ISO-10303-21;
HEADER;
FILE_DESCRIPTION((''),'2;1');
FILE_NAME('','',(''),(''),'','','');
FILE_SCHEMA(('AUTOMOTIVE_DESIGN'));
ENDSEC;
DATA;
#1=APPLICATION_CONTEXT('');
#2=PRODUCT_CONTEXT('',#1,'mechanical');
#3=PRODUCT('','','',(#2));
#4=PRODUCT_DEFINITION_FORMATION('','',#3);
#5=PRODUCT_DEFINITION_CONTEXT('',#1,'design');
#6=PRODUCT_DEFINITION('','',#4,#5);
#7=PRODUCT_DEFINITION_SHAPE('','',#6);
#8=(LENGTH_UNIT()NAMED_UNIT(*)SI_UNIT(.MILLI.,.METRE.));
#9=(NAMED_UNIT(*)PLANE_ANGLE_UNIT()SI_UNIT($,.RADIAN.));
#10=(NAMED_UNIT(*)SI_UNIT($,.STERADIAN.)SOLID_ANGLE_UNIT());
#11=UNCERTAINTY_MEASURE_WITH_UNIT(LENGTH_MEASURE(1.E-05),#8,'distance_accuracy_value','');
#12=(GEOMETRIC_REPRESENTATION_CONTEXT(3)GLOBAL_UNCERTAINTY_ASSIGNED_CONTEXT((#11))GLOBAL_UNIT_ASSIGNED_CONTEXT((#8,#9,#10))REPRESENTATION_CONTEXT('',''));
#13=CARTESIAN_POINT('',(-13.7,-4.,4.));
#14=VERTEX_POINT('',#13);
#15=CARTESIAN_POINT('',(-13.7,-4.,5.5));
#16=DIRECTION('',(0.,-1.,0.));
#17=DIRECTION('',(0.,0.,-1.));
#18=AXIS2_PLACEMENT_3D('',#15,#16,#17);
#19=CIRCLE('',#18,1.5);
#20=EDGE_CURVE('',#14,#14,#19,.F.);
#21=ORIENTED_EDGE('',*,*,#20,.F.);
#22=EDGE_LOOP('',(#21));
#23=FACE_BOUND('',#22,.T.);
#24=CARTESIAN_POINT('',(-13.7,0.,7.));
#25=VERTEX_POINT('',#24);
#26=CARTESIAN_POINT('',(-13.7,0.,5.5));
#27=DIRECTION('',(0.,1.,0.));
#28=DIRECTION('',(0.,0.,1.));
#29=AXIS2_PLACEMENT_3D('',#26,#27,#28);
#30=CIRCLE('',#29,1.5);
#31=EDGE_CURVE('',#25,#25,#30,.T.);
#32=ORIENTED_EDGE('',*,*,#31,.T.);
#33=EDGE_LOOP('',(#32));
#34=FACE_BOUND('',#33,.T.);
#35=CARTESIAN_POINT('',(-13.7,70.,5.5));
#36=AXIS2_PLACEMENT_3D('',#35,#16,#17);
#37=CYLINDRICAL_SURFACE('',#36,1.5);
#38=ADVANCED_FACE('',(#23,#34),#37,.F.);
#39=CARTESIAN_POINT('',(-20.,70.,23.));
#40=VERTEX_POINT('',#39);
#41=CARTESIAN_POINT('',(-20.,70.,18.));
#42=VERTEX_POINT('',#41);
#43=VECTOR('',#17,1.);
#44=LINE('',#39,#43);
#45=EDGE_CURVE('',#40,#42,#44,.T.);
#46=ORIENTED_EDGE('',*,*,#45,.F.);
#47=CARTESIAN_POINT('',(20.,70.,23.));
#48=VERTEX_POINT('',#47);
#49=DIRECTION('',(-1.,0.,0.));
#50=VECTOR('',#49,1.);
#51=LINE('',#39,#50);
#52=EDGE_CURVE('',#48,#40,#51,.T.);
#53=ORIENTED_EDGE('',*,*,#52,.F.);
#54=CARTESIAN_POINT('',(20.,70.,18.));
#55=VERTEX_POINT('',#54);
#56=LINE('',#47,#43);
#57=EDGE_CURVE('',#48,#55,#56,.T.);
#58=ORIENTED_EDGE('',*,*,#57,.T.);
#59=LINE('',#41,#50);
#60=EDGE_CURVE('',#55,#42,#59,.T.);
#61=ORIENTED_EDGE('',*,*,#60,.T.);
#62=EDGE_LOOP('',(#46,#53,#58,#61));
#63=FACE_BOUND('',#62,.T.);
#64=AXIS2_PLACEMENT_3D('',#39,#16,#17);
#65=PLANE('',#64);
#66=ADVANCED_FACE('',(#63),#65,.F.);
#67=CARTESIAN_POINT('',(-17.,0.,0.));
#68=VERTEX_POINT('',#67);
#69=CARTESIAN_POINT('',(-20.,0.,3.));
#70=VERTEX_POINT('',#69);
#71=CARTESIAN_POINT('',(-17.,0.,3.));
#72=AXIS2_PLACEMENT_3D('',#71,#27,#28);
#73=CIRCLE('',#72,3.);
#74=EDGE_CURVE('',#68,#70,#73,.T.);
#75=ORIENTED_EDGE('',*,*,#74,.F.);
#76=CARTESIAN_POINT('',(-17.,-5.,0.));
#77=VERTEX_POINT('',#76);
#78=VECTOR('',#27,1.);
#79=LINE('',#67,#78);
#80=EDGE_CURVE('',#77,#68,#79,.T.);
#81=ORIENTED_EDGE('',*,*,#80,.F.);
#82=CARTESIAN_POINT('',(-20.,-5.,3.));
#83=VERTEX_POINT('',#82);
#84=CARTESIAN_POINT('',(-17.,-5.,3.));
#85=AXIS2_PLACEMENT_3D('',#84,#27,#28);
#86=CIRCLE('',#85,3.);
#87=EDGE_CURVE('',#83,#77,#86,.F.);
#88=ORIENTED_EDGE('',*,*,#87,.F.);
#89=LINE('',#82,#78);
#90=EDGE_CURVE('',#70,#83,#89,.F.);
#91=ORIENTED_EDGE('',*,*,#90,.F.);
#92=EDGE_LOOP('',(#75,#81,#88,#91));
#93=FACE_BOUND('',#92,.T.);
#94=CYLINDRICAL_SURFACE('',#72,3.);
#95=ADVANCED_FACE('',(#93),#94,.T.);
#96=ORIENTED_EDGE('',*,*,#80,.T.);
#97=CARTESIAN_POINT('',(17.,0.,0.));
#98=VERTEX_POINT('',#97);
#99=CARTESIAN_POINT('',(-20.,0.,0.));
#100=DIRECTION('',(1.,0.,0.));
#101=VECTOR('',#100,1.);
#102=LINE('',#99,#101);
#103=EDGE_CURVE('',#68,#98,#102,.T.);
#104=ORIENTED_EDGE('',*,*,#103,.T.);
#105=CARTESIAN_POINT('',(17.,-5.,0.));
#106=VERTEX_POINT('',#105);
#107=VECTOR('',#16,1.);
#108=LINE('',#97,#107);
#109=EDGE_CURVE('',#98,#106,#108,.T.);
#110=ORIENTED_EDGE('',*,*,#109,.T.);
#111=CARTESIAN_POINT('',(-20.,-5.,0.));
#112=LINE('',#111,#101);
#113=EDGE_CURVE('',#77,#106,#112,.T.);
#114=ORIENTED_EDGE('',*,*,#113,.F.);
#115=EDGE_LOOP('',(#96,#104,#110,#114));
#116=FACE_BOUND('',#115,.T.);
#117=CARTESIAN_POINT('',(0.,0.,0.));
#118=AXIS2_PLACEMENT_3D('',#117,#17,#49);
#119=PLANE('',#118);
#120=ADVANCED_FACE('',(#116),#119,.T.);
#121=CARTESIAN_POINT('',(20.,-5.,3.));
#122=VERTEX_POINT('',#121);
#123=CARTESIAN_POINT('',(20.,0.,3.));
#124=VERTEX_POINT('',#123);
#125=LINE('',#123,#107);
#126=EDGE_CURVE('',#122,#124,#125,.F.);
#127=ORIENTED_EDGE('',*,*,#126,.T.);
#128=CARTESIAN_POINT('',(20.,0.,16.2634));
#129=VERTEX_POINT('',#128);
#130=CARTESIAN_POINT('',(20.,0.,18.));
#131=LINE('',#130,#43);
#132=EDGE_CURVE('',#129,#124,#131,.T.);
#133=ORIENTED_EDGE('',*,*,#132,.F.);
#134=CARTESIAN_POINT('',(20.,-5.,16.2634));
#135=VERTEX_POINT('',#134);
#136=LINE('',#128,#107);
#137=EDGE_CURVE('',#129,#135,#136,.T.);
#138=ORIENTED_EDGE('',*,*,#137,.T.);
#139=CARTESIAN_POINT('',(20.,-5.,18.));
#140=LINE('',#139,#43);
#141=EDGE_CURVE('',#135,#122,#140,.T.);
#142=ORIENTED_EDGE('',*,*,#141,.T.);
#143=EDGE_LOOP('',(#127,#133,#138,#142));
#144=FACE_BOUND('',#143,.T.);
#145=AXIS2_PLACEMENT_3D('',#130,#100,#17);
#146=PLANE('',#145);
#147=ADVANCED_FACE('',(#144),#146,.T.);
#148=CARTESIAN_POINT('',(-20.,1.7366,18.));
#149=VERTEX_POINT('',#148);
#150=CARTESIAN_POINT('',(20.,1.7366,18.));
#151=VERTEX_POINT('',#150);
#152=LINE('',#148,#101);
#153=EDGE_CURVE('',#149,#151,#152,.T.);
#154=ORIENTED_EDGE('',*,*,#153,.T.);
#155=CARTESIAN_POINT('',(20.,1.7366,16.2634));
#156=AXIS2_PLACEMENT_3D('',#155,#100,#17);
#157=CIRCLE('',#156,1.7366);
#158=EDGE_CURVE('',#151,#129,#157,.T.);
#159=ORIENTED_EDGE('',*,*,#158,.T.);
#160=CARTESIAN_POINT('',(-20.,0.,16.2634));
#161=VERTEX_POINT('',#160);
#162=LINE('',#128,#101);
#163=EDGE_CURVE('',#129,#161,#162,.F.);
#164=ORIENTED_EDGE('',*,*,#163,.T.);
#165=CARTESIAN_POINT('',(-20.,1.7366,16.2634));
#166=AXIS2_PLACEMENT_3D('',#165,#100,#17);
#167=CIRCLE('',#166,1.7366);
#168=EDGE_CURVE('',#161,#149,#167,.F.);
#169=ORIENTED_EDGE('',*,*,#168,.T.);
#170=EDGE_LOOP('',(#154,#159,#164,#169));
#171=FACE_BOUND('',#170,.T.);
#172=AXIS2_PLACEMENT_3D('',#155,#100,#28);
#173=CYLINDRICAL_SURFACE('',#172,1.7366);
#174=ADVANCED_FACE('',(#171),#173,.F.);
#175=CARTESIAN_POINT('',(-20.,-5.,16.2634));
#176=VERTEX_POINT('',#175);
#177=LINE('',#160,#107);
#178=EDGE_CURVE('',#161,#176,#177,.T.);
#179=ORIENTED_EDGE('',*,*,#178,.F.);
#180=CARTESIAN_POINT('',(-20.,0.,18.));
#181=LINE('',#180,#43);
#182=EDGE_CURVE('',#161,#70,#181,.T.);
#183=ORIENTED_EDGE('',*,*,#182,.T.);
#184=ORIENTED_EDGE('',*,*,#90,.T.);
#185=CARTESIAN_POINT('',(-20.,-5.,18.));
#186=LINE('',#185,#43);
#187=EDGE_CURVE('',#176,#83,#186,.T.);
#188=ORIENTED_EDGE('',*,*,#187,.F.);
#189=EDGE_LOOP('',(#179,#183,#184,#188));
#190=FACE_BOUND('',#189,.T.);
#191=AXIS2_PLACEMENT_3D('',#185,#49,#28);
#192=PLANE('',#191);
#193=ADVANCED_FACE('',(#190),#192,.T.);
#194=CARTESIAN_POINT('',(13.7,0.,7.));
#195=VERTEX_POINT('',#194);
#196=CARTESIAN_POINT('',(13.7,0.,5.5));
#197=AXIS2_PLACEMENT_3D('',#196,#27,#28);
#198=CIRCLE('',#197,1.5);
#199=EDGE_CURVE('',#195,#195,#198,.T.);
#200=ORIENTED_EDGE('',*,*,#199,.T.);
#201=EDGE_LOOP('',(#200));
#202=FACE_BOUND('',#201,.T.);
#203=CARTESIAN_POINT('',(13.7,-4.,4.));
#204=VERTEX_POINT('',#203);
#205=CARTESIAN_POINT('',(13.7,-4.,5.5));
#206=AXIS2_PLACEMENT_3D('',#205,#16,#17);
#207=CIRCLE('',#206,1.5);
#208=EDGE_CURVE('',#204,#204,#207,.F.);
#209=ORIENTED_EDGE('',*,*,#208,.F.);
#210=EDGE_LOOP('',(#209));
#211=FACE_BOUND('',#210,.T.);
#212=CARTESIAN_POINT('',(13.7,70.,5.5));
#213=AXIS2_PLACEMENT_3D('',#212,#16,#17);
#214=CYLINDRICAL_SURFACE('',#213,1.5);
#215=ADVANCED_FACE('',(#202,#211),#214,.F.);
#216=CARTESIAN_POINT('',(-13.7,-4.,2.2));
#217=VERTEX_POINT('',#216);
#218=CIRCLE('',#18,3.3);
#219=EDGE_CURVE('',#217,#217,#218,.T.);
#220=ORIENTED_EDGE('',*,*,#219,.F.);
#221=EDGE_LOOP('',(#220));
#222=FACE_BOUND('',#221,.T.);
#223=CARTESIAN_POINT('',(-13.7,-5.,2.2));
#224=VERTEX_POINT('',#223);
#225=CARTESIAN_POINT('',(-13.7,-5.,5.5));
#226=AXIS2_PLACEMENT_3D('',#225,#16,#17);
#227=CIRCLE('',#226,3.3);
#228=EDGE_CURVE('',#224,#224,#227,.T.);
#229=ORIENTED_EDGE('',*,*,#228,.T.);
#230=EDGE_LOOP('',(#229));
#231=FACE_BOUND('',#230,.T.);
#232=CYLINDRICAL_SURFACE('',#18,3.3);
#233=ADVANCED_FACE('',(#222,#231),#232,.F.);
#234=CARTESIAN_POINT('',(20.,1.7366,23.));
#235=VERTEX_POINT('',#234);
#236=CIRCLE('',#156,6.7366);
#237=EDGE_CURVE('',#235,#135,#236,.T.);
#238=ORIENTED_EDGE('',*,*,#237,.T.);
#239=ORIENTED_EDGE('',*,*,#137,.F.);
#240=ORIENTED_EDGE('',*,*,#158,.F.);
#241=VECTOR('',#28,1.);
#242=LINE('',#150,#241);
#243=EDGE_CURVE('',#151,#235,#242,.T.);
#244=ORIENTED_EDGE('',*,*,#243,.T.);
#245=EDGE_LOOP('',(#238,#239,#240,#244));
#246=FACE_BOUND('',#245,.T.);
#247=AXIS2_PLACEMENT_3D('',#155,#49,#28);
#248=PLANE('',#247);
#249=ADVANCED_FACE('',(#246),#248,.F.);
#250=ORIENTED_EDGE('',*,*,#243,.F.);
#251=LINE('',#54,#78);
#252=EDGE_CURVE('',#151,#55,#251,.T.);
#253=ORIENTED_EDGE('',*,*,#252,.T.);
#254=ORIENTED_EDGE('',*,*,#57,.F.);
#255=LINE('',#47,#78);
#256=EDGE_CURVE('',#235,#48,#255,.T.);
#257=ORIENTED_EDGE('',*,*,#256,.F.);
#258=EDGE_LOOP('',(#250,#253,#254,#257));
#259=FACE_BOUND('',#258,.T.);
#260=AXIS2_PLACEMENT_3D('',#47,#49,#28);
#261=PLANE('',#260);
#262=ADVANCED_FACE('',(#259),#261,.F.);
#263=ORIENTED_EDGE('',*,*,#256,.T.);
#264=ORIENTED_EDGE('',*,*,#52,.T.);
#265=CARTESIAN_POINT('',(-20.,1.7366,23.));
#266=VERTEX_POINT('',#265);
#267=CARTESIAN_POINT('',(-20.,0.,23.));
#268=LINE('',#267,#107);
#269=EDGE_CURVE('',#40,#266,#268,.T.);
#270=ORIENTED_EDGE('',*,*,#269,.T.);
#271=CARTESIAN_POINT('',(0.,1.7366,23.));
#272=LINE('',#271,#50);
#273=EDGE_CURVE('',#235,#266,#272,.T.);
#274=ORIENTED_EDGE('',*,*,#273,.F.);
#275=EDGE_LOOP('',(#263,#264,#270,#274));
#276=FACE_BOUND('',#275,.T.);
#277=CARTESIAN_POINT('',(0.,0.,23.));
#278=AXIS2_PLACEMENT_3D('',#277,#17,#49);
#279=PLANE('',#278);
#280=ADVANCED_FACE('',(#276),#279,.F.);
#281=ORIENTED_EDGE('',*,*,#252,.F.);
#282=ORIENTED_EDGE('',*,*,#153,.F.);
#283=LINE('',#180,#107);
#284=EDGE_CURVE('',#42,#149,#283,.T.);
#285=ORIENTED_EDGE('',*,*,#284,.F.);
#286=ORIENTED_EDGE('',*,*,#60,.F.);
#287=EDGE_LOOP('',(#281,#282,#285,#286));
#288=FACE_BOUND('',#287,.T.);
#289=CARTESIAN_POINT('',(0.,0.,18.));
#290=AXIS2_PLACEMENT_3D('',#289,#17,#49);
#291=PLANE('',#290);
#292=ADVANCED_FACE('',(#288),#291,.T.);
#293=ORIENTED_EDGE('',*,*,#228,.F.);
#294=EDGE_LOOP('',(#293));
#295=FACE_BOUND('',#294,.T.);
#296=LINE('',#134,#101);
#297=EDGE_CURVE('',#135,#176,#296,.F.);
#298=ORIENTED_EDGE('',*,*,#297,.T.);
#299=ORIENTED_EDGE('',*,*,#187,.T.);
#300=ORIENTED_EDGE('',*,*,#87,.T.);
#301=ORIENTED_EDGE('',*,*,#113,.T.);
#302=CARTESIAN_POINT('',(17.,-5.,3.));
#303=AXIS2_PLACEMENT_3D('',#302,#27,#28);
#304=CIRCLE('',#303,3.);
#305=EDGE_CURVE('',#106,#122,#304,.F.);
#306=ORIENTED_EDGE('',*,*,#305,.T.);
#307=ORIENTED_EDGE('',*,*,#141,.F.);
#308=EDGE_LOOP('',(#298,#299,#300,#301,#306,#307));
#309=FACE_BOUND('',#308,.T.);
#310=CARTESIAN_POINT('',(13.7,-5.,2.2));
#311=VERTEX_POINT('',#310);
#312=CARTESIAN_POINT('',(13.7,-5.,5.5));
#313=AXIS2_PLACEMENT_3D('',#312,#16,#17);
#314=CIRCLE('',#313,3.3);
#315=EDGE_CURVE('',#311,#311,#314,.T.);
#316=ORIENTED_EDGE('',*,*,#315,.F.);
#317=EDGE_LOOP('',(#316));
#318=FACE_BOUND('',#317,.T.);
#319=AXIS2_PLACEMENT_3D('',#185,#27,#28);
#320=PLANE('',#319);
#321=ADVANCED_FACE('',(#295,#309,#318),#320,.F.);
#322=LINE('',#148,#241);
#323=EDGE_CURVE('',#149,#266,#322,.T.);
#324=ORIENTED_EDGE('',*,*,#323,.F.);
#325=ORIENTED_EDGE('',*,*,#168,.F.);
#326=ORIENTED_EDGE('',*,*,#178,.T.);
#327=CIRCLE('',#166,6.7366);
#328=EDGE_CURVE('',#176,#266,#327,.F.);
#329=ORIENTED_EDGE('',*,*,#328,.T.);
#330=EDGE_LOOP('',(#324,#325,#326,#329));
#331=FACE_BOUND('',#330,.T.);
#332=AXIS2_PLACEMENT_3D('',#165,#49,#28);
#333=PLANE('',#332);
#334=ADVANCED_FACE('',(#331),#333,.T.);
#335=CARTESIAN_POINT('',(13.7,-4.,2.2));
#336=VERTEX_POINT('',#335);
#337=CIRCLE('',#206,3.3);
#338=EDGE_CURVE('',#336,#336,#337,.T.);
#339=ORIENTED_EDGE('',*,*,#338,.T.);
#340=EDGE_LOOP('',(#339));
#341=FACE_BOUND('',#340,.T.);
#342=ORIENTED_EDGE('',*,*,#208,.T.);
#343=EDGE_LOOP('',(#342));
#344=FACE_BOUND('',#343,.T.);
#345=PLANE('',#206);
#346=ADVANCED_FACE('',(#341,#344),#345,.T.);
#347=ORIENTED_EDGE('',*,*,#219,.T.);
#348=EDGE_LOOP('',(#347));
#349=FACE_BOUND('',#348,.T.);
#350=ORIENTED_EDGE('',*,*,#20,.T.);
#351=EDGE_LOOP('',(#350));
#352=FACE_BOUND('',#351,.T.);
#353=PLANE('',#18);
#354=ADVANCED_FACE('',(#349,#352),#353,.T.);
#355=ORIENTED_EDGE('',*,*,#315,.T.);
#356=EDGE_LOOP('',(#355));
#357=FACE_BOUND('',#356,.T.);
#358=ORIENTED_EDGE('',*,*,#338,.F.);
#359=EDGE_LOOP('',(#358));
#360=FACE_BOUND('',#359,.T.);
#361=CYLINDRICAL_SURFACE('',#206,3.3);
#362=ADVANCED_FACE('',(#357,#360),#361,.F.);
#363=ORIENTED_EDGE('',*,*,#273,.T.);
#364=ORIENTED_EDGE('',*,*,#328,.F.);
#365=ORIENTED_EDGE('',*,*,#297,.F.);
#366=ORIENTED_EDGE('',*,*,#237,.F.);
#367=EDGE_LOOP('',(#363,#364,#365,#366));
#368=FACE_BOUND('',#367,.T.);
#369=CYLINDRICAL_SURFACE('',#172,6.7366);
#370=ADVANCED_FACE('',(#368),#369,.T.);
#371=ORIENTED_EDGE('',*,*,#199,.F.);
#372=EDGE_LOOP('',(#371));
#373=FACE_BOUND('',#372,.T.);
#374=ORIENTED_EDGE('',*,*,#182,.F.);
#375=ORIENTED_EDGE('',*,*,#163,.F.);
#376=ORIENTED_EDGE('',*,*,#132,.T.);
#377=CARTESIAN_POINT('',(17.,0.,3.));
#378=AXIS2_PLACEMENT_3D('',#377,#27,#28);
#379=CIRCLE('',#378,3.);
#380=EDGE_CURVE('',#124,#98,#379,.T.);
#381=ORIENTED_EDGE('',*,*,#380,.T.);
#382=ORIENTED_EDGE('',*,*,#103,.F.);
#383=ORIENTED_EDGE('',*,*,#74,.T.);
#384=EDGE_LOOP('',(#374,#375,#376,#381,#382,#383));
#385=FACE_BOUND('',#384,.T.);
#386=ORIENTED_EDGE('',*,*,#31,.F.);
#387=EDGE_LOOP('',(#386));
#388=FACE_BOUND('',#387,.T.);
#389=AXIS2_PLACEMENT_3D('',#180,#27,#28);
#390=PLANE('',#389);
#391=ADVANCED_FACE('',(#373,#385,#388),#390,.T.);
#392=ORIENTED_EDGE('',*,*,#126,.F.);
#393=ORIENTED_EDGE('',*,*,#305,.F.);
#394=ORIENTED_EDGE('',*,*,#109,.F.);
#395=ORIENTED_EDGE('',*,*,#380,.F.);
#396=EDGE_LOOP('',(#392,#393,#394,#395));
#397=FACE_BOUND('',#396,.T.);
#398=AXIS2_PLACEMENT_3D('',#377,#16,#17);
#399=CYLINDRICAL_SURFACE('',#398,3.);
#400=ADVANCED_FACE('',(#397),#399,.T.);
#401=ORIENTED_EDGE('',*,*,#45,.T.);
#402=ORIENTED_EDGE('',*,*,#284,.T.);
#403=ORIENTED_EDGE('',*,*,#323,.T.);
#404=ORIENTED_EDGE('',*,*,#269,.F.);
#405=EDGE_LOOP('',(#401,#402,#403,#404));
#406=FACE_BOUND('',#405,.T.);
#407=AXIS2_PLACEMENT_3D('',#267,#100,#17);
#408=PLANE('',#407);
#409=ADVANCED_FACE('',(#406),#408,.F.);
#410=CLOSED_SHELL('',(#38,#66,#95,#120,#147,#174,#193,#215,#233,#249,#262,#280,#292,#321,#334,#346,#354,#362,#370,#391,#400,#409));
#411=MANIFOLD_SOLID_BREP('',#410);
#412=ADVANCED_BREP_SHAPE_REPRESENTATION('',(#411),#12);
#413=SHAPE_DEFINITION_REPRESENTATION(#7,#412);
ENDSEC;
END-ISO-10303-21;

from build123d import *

# Parameters (mm, degrees)
SKETCH_13_W                      = 40
SKETCH_13_H                      = 5
SM_BASE_FLANGE_1_DEPTH           = 18
SM_EDGE_FLANGE_1_STRIP_W         = 23.4732
SM_EDGE_FLANGE_1_STRIP_H         = 5
SM_EDGE_FLANGE_1_STRIP_CUT_DEPTH = 40
SM_EDGE_FLANGE_1_DEPTH           = 40
SKETCH_26_R                      = 1.5
CUT_EXTRUDE_1_DEPTH              = 81.956778592
FILLET_1_R                       = 3
SKETCH_32_R                      = 3.3
CUT_EXTRUDE_4_DEPTH              = 1


# Sheet-metal steps are written as plain solids
with BuildPart() as part:
    # 草图13 → 基体-法兰1 (new body)
    with BuildSketch(Plane.XY):
        with Locations((0, -2.5)):
            Rectangle(SKETCH_13_W, SKETCH_13_H)
    extrude(amount=SM_BASE_FLANGE_1_DEPTH)

    # 边线-法兰1 strip (across the edge) → 边线-法兰1 strip cut (cut)
    with BuildSketch(Plane(origin=(-20, 0, 18), x_dir=(0, 0, -1), z_dir=(1, 0, 0))):
        with Locations((-10, -2.5)):
            Rectangle(SM_EDGE_FLANGE_1_STRIP_W, SM_EDGE_FLANGE_1_STRIP_H)
    extrude(amount=SM_EDGE_FLANGE_1_STRIP_CUT_DEPTH, mode=Mode.SUBTRACT)

    # 边线-法兰1 section (across the edge) → 边线-法兰1 (add)
    with BuildSketch(Plane(origin=(-20, 0, 18), x_dir=(0, 0, -1), z_dir=(1, 0, 0))):
        with BuildLine():
            Line((-5, 1.7366), (-5, 70))
            Line((-5, 70), (0, 70))
            Line((0, 70), (0, 1.7366))
            ThreePointArc((0, 1.7366), (0.508638364, 0.508638364), (1.7366, 0))
            Line((1.7366, 0), (1.7366, -5))
            ThreePointArc((1.7366, -5), (-3.026895542, -3.026895542), (-5, 1.7366))
        make_face()
    extrude(amount=SM_EDGE_FLANGE_1_DEPTH)

    # 草图26 → 切除-拉伸1 (cut, through all)
    with BuildSketch(Plane.XZ.offset(5)):
        with Locations(Location((-13.7, 5.5, 0), (0, 0, 270))):
            Circle(SKETCH_26_R)
        with Locations(Location((13.7, 5.5, 0), (0, 0, 270))):
            Circle(SKETCH_26_R)
    extrude(amount=-CUT_EXTRUDE_1_DEPTH, mode=Mode.SUBTRACT)

    # 圆角1
    fillet_1_edges = [part.edges().sort_by_distance(p)[0] for p in [
        (-20, -2.5, 0),
        (20, -2.5, 0),
    ]]
    fillet(fillet_1_edges, radius=FILLET_1_R)

    # 草图32 → 切除-拉伸4 (cut)
    with BuildSketch(Plane(origin=(0, -5, 0), x_dir=(-1, 0, 0), z_dir=(0, -1, 0))):
        with Locations(Location((13.7, -5.5, 0), (0, 0, 90))):
            Circle(SKETCH_32_R)
        with Locations(Location((-13.7, -5.5, 0), (0, 0, 90))):
            Circle(SKETCH_32_R)
    extrude(amount=-CUT_EXTRUDE_4_DEPTH, mode=Mode.SUBTRACT)


solid = part.part
